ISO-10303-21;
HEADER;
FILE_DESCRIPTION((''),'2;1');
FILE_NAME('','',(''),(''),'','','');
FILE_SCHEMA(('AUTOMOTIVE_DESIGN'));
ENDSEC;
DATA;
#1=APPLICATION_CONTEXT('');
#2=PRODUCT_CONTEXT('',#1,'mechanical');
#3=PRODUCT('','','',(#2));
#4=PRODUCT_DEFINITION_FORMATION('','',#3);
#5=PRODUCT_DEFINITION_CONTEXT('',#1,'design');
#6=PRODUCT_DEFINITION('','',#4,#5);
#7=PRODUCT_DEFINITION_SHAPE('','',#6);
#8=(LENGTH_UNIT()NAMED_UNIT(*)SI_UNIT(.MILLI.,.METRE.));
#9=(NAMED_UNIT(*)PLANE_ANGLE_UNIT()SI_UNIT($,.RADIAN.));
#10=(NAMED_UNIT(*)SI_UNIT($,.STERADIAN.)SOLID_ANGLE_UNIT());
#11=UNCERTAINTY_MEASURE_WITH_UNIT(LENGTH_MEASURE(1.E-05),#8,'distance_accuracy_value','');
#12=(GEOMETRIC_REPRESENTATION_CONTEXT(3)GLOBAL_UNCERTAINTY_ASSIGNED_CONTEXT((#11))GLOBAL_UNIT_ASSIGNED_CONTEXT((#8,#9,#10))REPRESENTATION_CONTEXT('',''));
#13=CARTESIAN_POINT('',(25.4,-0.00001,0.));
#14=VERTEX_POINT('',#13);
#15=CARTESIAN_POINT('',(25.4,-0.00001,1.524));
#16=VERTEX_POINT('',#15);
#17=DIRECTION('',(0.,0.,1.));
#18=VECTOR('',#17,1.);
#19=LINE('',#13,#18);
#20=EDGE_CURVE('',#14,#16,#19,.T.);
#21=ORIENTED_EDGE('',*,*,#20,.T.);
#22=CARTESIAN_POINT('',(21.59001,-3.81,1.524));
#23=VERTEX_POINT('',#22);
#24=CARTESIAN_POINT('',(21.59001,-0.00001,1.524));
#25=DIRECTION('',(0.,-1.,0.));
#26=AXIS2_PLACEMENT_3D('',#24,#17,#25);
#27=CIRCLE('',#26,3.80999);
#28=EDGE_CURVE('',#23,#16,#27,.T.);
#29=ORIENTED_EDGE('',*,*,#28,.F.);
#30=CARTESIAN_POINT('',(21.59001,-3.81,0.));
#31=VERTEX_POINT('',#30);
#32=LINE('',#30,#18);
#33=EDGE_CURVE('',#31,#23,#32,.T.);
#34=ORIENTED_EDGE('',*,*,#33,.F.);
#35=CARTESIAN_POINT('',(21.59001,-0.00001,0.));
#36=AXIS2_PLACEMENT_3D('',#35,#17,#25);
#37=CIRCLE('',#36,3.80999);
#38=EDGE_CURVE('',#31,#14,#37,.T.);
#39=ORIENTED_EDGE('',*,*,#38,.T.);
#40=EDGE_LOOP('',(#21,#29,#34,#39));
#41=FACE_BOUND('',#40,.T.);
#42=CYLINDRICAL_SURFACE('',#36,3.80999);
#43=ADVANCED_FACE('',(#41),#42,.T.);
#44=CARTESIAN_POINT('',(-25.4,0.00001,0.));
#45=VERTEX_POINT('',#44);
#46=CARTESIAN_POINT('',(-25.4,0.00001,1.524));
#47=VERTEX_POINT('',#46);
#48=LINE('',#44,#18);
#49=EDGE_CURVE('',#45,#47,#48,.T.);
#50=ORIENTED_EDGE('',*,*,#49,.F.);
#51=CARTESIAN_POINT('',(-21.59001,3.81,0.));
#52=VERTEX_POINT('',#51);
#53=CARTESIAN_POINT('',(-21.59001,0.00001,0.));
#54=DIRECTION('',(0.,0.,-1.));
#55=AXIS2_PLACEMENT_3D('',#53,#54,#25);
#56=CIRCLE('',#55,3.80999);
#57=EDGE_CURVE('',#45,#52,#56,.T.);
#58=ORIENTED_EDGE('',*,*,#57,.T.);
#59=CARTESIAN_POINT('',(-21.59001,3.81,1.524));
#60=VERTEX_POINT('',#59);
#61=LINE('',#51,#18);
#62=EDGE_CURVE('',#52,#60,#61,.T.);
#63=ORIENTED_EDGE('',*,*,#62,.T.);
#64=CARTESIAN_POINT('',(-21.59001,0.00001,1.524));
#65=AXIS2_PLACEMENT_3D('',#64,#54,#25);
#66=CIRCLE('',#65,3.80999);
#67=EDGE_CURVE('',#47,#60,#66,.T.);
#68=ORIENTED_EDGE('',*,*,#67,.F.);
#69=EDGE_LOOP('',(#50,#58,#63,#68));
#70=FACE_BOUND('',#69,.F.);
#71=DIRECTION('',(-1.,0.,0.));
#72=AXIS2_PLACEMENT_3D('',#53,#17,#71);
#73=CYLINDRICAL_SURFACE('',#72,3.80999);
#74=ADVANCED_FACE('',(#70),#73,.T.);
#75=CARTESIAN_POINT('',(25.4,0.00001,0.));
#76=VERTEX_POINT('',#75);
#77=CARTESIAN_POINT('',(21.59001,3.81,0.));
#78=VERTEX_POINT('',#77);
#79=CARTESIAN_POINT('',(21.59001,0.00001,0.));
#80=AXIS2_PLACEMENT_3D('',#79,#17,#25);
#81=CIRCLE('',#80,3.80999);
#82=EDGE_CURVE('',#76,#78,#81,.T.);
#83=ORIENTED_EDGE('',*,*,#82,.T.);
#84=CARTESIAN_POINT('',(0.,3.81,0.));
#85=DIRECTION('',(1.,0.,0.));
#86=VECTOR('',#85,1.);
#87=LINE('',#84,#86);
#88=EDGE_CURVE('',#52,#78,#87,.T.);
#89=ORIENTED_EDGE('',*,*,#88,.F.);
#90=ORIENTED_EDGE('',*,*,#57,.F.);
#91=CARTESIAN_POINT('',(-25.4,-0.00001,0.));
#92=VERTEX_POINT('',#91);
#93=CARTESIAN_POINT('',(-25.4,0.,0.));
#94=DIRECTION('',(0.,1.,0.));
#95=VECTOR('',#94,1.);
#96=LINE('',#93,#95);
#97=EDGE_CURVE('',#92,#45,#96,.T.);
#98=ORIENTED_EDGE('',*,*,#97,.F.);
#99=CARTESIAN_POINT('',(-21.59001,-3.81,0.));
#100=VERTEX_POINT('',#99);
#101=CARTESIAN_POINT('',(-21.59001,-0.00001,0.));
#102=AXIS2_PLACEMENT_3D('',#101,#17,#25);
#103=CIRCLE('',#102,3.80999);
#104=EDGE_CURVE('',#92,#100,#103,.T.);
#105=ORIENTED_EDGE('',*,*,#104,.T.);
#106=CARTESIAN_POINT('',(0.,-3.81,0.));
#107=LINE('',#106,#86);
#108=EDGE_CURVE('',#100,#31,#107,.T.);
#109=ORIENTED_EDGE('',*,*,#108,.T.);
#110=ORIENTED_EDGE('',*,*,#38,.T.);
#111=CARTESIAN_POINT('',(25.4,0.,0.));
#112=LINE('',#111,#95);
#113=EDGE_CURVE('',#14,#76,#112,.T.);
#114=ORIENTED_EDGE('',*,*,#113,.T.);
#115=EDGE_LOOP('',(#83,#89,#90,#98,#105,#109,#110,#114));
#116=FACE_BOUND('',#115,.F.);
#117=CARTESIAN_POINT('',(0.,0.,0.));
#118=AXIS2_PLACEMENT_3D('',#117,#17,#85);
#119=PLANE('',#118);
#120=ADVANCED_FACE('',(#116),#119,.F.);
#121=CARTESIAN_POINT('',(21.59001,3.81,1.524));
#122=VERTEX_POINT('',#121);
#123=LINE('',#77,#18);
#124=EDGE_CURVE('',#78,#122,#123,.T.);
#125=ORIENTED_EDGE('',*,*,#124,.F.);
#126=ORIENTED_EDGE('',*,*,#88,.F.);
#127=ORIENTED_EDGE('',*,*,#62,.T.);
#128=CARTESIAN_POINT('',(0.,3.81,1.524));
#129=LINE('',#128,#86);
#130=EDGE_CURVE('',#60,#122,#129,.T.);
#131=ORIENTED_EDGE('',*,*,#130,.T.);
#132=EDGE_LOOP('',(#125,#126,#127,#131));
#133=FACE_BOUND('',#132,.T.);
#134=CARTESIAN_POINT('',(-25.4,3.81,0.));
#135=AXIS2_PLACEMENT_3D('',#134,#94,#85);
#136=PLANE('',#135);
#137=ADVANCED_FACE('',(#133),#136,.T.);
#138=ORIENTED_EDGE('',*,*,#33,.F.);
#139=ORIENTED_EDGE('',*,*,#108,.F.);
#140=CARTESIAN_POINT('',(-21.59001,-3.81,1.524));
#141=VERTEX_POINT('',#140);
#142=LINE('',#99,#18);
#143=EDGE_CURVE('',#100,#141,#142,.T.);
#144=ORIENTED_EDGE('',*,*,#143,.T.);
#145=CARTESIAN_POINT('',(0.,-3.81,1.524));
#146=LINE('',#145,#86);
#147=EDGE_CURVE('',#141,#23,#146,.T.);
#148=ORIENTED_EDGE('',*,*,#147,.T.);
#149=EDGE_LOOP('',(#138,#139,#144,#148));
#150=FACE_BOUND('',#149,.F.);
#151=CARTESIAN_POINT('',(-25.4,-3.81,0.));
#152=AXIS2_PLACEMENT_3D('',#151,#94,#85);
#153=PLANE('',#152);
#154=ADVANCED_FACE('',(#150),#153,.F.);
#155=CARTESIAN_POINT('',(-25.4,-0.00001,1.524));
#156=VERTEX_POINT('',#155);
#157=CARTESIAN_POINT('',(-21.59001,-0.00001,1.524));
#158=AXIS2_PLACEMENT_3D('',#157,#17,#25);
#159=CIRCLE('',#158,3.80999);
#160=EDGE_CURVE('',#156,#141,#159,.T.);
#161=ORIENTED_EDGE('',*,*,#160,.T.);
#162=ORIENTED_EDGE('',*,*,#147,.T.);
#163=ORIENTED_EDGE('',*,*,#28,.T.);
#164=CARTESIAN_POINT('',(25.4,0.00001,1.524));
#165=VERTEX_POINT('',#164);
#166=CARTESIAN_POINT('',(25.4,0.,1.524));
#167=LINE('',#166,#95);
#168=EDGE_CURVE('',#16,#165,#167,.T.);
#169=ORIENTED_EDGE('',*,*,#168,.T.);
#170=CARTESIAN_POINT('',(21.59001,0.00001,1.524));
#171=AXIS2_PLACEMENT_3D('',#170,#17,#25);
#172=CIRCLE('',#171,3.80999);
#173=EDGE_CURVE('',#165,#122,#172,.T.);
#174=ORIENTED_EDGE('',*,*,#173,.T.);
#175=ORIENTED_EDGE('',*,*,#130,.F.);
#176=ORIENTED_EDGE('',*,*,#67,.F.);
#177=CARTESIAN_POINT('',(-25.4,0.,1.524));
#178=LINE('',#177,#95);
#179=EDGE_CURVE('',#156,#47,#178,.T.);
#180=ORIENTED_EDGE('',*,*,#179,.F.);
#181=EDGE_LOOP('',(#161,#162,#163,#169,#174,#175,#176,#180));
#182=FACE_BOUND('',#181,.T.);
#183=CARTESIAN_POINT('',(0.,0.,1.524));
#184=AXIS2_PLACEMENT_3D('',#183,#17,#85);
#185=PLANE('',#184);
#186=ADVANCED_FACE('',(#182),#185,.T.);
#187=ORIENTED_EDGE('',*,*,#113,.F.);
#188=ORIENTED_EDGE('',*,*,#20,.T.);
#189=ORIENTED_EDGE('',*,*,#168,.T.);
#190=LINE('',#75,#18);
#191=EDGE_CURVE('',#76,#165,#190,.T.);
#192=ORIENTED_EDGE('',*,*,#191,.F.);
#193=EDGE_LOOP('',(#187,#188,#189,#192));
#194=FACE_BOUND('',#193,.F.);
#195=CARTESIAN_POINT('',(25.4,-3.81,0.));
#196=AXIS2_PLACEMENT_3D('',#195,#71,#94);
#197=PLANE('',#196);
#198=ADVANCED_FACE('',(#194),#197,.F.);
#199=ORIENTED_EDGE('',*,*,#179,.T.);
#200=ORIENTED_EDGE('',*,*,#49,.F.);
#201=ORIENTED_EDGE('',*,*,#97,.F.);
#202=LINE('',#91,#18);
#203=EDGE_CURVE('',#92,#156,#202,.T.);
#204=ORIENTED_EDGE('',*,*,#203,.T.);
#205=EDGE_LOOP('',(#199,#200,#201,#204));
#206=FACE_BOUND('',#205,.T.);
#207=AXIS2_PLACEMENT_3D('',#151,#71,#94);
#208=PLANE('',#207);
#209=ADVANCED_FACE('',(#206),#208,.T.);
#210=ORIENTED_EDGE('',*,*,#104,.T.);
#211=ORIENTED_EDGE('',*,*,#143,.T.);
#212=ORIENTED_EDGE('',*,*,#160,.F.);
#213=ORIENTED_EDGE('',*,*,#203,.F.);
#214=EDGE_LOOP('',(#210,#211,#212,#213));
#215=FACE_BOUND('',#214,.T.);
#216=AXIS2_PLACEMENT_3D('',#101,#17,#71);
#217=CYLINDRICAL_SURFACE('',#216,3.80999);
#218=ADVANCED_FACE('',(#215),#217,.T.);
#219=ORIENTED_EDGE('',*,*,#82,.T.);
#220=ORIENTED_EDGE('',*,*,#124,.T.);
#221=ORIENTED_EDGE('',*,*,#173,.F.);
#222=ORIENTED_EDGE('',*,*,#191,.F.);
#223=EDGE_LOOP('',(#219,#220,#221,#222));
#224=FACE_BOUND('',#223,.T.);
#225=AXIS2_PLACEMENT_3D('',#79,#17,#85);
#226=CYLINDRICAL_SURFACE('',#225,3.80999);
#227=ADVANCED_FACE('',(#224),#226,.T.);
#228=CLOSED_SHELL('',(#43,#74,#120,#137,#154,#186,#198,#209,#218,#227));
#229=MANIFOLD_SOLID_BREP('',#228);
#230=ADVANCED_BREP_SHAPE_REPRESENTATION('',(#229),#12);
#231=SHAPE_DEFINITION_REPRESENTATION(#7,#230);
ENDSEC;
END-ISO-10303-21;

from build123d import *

# Parameters (mm, degrees)
F0_W     = 50.8
F0_H     = 7.62
F1_DEPTH = 1.524
F2_R     = 3.80999


# Not quite as in the source:
# - a fillet or chamfer is up to 0.001 mm smaller than in the source, because OpenCascade refuses the exact size


with BuildPart() as f1:
    # F0 (on Top) → F1 (new body)
    with BuildSketch(Plane.XY):
        Rectangle(F0_W, F0_H)
    extrude(amount=F1_DEPTH)

    # F2 (radius 3.81 in the source; OpenCascade refuses exactly that, so slightly less here)
    f2_edges = [f1.edges().sort_by_distance(p)[0] for p in [
        (25.4, 3.81, 0.762),
        (25.4, -3.81, 0.762),
        (-25.4, -3.81, 0.762),
        (-25.4, 3.81, 0.762),
    ]]
    fillet(f2_edges, radius=F2_R)


solid = f1.part
